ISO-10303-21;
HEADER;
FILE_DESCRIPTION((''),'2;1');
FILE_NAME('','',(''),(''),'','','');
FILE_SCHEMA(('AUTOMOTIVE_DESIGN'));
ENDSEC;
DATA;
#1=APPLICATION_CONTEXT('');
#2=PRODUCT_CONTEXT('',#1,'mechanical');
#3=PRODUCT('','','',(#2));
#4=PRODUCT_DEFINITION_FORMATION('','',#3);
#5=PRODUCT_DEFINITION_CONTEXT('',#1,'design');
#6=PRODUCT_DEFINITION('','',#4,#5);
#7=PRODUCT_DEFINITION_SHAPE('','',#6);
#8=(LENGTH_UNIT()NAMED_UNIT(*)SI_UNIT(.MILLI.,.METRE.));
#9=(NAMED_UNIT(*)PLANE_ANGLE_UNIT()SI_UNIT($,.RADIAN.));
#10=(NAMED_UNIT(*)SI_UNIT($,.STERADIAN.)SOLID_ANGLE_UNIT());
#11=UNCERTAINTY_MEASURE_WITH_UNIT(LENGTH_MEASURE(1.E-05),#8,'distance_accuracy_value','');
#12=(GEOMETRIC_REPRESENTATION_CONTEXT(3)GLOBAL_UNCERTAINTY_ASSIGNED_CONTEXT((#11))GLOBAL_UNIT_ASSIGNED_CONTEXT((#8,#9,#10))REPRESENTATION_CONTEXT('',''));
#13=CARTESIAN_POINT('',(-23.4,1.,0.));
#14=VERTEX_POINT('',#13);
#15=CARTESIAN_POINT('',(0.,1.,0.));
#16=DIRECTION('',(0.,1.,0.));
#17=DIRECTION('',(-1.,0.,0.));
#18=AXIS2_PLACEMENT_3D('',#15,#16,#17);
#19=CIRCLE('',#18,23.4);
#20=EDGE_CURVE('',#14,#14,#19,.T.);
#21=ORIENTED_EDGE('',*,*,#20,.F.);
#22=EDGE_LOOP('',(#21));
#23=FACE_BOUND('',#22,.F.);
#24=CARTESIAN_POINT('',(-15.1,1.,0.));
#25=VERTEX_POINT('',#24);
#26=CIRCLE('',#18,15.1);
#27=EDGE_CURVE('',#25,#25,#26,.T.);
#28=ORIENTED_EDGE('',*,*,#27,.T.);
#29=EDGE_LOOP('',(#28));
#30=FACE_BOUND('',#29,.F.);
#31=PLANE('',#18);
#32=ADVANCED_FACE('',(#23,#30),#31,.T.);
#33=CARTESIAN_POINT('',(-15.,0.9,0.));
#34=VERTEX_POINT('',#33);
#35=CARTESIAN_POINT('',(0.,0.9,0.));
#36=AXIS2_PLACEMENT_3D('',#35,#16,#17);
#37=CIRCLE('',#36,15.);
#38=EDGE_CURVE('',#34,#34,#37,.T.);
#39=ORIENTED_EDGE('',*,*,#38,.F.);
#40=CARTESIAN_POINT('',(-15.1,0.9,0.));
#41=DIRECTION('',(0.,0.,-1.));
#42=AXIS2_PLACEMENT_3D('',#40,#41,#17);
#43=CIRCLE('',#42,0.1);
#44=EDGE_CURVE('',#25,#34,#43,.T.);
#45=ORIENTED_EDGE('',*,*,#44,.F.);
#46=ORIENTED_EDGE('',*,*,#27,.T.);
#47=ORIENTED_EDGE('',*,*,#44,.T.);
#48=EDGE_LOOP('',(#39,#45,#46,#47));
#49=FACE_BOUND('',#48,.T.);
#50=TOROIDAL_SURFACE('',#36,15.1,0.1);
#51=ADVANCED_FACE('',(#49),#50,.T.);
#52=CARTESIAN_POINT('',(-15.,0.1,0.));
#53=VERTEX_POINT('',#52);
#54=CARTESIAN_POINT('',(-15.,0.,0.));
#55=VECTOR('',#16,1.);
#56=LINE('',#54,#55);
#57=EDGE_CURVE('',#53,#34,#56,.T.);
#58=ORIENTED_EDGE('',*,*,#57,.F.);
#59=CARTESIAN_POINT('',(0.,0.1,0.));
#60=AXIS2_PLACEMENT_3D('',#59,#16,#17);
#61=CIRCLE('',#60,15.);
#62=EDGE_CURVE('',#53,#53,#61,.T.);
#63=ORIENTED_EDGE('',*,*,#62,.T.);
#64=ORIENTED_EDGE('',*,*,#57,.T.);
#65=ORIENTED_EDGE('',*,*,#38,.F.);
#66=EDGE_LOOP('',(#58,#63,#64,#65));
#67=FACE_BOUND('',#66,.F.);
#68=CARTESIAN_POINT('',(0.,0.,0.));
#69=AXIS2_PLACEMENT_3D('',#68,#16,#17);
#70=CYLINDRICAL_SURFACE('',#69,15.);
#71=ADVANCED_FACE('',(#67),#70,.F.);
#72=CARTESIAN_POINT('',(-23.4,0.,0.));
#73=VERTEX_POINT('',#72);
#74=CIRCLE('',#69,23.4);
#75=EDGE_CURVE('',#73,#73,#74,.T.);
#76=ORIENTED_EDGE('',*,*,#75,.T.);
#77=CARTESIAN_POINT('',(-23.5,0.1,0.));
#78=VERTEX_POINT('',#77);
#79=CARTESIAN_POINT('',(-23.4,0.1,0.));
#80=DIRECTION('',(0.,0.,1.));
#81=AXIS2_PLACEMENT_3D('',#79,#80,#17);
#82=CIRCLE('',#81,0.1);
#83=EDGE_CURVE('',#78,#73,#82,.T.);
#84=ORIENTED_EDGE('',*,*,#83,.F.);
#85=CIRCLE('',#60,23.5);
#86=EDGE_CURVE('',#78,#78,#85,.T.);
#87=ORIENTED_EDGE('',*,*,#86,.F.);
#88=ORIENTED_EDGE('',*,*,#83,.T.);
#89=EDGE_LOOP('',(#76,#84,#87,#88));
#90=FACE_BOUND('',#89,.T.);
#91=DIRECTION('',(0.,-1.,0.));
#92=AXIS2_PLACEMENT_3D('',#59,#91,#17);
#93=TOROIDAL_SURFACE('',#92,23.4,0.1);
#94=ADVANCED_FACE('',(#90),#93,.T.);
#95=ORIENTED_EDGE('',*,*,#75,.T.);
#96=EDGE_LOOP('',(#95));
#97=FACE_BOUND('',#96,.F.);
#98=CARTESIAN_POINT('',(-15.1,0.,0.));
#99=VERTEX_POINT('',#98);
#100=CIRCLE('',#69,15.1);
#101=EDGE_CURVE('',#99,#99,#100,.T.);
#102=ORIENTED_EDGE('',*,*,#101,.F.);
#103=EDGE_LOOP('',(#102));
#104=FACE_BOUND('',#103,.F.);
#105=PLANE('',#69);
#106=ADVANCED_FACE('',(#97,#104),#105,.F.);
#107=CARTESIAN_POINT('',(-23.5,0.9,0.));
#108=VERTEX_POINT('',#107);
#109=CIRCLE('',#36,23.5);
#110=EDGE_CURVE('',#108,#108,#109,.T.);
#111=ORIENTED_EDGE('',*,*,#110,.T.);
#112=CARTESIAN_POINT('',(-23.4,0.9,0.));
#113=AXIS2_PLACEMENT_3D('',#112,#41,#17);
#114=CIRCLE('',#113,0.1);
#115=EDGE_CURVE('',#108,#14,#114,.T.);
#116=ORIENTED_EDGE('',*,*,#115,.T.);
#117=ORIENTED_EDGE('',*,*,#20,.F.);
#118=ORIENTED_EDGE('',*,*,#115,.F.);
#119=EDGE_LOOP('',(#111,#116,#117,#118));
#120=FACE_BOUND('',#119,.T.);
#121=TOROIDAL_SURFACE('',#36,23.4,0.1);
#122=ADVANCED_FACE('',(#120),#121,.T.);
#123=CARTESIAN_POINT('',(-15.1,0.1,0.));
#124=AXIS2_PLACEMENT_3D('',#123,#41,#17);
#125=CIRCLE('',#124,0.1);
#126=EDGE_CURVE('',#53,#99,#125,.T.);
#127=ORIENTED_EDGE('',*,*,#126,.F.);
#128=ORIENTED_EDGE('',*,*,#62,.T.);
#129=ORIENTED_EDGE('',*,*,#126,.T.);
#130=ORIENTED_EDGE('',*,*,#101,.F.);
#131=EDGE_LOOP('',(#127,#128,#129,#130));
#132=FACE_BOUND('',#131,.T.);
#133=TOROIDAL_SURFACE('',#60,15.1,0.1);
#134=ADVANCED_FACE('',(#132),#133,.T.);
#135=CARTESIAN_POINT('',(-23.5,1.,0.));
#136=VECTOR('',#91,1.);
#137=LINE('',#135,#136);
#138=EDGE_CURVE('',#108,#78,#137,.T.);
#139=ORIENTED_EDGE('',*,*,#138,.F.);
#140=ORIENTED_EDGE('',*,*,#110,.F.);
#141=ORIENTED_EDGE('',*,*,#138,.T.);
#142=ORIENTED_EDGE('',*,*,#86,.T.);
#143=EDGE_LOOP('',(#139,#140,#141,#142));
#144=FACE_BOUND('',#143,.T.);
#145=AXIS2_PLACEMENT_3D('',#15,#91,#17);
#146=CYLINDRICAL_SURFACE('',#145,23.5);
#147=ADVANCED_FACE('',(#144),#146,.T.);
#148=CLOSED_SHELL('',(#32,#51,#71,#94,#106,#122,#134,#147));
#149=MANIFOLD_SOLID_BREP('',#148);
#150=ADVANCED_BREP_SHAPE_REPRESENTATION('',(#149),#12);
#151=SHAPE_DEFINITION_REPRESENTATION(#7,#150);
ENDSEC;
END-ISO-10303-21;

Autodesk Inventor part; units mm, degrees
ref_plane "YZ Plane" through (0, 0, 0) normal (1, 0, 0) x (0, 1, 0)
ref_plane "XZ Plane" through (0, 0, 0) normal (0, 1, 0) x (-1, 0, 0)
ref_plane "XY Plane" through (0, 0, 0) normal (0, 0, 1) x (1, 0, 0)
sketch "Skizze outline for Körper" plane through (0, 0, 0) normal (0, 0, 1) x (1, 0, 0)
  line L0 (-23.5, 0) -> (-15, 0)
  line L1 (-23.5, 1) -> (-23.5, 0)
  line L2 (-15, 1) -> (-23.5, 1)
  line L3 (-15, 0) -> (-15, 1)
revolve "Körper" add sketch "Skizze outline for Körper" angle 360 about axis through (0, -10, 0) along (0, 1, 0)
fillet "Rundung1" radius 0.1 4 edges at (23.5, 0, 0) (23.5, 1, 0) (15, 0, 0) (15, 1, 0)
sketch "Skizze" plane through (0, 0, 0) normal (0, 0, 1) x (1, 0, 0)
  line L0 (-23.5, 0) -> (-23.5, 1)
  line L1 (-23.5, 1) -> (-15, 1)
  line L2 (-15, 1) -> (-15, 0)
  line L3 (-94, 0) -> (-66, 0) projected
  line L4 (0, -0.5) -> (0, 3) projected
  dimension "d2" = 1
  dimension "d4" = 30
  dimension "d5" = 47
equation "\"d0\" = 0.1 * KB"
equation "\"d2\" = KB"
equation "\"d4\" = WD"
equation "\"d5\" = BD"
equation "\"WD\" = 30"
equation "\"BD\" = 47"
equation "\"KB\" = 1"
equation "\"BBA\" = 90deg"
equation "\"BR\" = 0.5 * BD"
equation "\"WR\" = 0.5 * WD"
properties part number "DIN 5405 T3 - AS3047 - 30 x 47 x 1" material "Stahl, weich"
